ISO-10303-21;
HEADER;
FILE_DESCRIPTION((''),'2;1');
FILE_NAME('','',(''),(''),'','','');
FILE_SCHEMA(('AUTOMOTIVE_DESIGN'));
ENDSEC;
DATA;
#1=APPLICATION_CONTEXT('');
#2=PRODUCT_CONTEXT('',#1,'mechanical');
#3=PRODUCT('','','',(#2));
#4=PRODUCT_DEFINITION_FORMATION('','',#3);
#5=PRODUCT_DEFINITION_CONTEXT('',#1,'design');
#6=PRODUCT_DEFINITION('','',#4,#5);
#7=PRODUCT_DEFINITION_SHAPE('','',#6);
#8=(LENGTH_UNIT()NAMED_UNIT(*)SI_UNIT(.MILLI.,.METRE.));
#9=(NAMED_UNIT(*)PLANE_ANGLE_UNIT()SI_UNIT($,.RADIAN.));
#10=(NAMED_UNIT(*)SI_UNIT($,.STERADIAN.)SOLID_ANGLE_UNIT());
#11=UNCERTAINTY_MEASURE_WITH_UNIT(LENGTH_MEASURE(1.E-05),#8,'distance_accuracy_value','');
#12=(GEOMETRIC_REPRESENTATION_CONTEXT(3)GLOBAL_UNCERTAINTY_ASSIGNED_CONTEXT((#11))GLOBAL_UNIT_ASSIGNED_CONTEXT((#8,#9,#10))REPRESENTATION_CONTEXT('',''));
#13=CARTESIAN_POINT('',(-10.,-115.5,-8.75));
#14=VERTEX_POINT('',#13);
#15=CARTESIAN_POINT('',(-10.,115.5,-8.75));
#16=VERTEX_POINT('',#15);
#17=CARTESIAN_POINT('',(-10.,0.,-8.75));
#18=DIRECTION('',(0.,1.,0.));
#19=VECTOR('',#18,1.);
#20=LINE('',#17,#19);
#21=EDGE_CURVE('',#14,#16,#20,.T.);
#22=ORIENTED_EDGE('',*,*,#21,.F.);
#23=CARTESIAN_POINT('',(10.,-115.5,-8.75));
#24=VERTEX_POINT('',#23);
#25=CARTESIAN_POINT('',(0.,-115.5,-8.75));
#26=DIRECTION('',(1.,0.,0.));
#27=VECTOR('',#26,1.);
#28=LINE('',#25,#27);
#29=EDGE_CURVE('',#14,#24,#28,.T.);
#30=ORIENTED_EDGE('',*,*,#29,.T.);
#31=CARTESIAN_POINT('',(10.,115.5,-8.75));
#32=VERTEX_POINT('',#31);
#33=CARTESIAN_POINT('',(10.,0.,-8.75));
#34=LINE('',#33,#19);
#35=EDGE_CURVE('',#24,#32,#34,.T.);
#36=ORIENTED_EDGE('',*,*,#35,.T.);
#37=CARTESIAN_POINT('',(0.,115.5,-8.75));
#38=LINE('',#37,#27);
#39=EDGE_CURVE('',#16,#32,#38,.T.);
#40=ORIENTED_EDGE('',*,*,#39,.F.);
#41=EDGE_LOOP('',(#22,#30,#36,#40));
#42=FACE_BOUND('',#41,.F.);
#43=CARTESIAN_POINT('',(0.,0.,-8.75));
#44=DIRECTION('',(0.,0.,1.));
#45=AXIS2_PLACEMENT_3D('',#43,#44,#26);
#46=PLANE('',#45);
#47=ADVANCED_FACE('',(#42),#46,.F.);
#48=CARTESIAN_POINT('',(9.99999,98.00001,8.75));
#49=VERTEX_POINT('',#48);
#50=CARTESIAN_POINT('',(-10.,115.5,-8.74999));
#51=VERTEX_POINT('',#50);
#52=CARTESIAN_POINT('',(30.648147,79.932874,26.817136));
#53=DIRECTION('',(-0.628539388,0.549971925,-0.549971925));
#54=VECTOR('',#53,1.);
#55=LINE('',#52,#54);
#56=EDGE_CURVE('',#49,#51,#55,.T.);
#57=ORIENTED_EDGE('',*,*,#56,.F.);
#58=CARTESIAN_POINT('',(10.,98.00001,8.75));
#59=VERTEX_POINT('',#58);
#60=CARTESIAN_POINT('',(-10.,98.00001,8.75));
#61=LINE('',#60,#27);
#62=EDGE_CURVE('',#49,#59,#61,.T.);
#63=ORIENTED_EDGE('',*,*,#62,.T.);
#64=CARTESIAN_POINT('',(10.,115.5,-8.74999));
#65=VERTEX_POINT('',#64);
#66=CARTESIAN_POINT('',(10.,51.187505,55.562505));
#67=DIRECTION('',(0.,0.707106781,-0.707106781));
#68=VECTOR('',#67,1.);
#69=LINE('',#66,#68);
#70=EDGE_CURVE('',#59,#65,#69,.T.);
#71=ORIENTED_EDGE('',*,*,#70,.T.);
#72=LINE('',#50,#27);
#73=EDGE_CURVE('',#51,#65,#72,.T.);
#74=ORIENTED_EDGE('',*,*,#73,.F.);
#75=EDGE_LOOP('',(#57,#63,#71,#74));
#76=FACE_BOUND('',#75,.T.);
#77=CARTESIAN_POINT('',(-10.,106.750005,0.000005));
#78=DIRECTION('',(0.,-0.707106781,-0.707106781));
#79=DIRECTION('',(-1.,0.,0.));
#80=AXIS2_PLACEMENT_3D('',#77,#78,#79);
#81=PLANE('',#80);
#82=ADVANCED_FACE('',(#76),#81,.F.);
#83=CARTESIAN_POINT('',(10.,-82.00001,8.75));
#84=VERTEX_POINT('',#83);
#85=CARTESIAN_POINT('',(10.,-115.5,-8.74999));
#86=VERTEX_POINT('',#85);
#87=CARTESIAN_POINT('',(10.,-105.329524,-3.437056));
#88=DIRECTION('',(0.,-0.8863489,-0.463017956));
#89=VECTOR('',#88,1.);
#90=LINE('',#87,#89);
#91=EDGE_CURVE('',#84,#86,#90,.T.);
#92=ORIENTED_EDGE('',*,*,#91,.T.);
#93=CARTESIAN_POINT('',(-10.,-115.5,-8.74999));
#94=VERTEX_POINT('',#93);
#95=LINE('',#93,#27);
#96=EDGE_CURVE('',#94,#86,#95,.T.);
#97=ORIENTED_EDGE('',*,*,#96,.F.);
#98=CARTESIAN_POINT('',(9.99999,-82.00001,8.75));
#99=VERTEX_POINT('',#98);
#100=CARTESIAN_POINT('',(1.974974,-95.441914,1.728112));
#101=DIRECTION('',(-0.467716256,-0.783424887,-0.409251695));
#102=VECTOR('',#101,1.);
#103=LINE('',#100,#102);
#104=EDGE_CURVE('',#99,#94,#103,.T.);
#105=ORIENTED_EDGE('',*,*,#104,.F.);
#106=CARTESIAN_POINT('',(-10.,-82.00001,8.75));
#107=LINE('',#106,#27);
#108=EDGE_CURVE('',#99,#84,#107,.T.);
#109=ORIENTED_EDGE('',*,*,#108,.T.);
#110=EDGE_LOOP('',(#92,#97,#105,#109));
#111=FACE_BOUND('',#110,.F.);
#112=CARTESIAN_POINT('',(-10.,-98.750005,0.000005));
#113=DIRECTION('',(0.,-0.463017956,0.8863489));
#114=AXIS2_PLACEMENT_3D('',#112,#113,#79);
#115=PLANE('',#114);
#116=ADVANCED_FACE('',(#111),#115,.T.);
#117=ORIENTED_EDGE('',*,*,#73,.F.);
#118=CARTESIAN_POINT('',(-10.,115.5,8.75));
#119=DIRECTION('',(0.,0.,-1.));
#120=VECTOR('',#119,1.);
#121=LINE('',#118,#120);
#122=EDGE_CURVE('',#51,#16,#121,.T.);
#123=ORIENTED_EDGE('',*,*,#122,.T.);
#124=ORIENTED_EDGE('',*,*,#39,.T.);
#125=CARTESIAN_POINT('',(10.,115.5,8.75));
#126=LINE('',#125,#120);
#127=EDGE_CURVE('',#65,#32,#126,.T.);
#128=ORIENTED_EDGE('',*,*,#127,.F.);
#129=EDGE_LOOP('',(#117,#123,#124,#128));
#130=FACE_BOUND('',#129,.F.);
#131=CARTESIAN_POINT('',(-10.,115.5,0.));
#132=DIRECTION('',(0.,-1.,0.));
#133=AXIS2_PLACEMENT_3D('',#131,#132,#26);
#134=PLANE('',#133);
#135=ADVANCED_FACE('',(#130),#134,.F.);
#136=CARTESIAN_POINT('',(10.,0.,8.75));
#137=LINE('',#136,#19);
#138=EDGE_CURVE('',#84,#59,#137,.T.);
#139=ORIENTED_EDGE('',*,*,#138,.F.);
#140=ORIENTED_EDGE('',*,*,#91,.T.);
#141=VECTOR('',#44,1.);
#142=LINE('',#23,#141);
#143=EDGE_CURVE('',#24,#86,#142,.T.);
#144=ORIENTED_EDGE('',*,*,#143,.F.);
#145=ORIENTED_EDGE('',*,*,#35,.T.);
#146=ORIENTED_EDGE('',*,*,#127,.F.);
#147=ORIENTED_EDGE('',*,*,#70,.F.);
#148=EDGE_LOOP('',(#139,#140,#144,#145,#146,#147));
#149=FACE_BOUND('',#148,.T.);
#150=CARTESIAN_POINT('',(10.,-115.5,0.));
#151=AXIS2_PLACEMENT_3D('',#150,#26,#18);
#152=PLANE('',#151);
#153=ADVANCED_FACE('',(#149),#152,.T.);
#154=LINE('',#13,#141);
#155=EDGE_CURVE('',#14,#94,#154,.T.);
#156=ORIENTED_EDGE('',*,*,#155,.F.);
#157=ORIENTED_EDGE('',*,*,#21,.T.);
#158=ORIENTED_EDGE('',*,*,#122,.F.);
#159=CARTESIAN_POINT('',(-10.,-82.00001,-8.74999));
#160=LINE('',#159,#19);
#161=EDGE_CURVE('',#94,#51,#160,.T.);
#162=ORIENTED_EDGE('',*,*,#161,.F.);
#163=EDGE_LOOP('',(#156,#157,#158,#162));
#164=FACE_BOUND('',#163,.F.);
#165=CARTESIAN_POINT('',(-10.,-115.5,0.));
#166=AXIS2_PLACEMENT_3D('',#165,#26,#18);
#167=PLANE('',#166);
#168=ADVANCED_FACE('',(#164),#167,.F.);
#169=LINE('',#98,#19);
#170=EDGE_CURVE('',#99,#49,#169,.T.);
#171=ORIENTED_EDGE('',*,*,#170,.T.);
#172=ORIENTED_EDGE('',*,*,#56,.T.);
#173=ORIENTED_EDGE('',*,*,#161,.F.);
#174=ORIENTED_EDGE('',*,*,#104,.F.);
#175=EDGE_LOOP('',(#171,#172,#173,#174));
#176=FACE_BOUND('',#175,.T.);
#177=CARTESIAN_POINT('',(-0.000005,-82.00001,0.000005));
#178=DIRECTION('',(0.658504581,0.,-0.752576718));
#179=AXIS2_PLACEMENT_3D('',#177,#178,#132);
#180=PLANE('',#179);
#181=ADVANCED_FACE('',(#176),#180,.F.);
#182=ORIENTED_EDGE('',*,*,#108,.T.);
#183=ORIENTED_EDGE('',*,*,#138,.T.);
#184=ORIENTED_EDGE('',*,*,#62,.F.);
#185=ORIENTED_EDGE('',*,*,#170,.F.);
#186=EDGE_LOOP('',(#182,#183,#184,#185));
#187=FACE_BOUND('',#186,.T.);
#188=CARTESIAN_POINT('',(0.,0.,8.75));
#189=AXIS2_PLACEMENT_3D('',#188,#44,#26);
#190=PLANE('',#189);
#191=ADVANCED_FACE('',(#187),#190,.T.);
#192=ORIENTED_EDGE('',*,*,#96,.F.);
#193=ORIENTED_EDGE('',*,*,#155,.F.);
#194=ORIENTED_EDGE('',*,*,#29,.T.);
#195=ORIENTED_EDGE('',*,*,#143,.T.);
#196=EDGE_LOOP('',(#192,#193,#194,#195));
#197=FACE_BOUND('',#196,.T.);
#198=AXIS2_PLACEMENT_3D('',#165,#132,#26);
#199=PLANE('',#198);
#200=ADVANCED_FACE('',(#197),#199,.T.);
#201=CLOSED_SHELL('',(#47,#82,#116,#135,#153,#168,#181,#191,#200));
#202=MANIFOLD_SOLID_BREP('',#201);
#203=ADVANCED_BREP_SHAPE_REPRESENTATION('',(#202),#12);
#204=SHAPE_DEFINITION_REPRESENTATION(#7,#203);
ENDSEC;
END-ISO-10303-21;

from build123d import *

# Parameters (mm, degrees)
F0_W     = 20
F0_H     = 231
F1_DEPTH = 8.75
F2_SIZE2 = 17.49999
F2_SIZE  = 33.49999
F3_SIZE2 = 17.49999
F3_SIZE  = 17.49999
F4_SIZE2 = 17.49999
F4_SIZE  = 19.99999


# Not quite as in the source:
# - a fillet or chamfer is up to 0.001 mm smaller than in the source, because OpenCascade refuses the exact size


with BuildPart() as f1:
    # F0 (on Top) → F1 (new body, symmetric)
    with BuildSketch(Plane.XY):
        Rectangle(F0_W, F0_H)
    extrude(amount=F1_DEPTH, both=True)

    # F2 (size 33.5 and 17.5 in the source; OpenCascade refuses exactly that, so slightly less here)
    f2_edges = [f1.edges().sort_by_distance(p)[0] for p in [
        (0, -115.5, 8.75),
    ]]
    f2_side = f1.faces().sort_by_distance((0, 0, 8.75))[0]
    chamfer(f2_edges, length=F2_SIZE, length2=F2_SIZE2, reference=f2_side)

    # F3 (size 17.5 and 17.5 in the source; OpenCascade refuses exactly that, so slightly less here)
    f3_edges = [f1.edges().sort_by_distance(p)[0] for p in [
        (0, 115.5, 8.75),
    ]]
    chamfer(f3_edges, length=F3_SIZE, length2=F3_SIZE2)

    # F4 (size 20 and 17.5 in the source; OpenCascade refuses exactly that, so slightly less here)
    f4_edges = [f1.edges().sort_by_distance(p)[0] for p in [
        (-10, 8, 8.75),
    ]]
    f4_side = f1.faces().sort_by_distance((0, 8, 8.75))[0]
    chamfer(f4_edges, length=F4_SIZE, length2=F4_SIZE2, reference=f4_side)


solid = f1.part
